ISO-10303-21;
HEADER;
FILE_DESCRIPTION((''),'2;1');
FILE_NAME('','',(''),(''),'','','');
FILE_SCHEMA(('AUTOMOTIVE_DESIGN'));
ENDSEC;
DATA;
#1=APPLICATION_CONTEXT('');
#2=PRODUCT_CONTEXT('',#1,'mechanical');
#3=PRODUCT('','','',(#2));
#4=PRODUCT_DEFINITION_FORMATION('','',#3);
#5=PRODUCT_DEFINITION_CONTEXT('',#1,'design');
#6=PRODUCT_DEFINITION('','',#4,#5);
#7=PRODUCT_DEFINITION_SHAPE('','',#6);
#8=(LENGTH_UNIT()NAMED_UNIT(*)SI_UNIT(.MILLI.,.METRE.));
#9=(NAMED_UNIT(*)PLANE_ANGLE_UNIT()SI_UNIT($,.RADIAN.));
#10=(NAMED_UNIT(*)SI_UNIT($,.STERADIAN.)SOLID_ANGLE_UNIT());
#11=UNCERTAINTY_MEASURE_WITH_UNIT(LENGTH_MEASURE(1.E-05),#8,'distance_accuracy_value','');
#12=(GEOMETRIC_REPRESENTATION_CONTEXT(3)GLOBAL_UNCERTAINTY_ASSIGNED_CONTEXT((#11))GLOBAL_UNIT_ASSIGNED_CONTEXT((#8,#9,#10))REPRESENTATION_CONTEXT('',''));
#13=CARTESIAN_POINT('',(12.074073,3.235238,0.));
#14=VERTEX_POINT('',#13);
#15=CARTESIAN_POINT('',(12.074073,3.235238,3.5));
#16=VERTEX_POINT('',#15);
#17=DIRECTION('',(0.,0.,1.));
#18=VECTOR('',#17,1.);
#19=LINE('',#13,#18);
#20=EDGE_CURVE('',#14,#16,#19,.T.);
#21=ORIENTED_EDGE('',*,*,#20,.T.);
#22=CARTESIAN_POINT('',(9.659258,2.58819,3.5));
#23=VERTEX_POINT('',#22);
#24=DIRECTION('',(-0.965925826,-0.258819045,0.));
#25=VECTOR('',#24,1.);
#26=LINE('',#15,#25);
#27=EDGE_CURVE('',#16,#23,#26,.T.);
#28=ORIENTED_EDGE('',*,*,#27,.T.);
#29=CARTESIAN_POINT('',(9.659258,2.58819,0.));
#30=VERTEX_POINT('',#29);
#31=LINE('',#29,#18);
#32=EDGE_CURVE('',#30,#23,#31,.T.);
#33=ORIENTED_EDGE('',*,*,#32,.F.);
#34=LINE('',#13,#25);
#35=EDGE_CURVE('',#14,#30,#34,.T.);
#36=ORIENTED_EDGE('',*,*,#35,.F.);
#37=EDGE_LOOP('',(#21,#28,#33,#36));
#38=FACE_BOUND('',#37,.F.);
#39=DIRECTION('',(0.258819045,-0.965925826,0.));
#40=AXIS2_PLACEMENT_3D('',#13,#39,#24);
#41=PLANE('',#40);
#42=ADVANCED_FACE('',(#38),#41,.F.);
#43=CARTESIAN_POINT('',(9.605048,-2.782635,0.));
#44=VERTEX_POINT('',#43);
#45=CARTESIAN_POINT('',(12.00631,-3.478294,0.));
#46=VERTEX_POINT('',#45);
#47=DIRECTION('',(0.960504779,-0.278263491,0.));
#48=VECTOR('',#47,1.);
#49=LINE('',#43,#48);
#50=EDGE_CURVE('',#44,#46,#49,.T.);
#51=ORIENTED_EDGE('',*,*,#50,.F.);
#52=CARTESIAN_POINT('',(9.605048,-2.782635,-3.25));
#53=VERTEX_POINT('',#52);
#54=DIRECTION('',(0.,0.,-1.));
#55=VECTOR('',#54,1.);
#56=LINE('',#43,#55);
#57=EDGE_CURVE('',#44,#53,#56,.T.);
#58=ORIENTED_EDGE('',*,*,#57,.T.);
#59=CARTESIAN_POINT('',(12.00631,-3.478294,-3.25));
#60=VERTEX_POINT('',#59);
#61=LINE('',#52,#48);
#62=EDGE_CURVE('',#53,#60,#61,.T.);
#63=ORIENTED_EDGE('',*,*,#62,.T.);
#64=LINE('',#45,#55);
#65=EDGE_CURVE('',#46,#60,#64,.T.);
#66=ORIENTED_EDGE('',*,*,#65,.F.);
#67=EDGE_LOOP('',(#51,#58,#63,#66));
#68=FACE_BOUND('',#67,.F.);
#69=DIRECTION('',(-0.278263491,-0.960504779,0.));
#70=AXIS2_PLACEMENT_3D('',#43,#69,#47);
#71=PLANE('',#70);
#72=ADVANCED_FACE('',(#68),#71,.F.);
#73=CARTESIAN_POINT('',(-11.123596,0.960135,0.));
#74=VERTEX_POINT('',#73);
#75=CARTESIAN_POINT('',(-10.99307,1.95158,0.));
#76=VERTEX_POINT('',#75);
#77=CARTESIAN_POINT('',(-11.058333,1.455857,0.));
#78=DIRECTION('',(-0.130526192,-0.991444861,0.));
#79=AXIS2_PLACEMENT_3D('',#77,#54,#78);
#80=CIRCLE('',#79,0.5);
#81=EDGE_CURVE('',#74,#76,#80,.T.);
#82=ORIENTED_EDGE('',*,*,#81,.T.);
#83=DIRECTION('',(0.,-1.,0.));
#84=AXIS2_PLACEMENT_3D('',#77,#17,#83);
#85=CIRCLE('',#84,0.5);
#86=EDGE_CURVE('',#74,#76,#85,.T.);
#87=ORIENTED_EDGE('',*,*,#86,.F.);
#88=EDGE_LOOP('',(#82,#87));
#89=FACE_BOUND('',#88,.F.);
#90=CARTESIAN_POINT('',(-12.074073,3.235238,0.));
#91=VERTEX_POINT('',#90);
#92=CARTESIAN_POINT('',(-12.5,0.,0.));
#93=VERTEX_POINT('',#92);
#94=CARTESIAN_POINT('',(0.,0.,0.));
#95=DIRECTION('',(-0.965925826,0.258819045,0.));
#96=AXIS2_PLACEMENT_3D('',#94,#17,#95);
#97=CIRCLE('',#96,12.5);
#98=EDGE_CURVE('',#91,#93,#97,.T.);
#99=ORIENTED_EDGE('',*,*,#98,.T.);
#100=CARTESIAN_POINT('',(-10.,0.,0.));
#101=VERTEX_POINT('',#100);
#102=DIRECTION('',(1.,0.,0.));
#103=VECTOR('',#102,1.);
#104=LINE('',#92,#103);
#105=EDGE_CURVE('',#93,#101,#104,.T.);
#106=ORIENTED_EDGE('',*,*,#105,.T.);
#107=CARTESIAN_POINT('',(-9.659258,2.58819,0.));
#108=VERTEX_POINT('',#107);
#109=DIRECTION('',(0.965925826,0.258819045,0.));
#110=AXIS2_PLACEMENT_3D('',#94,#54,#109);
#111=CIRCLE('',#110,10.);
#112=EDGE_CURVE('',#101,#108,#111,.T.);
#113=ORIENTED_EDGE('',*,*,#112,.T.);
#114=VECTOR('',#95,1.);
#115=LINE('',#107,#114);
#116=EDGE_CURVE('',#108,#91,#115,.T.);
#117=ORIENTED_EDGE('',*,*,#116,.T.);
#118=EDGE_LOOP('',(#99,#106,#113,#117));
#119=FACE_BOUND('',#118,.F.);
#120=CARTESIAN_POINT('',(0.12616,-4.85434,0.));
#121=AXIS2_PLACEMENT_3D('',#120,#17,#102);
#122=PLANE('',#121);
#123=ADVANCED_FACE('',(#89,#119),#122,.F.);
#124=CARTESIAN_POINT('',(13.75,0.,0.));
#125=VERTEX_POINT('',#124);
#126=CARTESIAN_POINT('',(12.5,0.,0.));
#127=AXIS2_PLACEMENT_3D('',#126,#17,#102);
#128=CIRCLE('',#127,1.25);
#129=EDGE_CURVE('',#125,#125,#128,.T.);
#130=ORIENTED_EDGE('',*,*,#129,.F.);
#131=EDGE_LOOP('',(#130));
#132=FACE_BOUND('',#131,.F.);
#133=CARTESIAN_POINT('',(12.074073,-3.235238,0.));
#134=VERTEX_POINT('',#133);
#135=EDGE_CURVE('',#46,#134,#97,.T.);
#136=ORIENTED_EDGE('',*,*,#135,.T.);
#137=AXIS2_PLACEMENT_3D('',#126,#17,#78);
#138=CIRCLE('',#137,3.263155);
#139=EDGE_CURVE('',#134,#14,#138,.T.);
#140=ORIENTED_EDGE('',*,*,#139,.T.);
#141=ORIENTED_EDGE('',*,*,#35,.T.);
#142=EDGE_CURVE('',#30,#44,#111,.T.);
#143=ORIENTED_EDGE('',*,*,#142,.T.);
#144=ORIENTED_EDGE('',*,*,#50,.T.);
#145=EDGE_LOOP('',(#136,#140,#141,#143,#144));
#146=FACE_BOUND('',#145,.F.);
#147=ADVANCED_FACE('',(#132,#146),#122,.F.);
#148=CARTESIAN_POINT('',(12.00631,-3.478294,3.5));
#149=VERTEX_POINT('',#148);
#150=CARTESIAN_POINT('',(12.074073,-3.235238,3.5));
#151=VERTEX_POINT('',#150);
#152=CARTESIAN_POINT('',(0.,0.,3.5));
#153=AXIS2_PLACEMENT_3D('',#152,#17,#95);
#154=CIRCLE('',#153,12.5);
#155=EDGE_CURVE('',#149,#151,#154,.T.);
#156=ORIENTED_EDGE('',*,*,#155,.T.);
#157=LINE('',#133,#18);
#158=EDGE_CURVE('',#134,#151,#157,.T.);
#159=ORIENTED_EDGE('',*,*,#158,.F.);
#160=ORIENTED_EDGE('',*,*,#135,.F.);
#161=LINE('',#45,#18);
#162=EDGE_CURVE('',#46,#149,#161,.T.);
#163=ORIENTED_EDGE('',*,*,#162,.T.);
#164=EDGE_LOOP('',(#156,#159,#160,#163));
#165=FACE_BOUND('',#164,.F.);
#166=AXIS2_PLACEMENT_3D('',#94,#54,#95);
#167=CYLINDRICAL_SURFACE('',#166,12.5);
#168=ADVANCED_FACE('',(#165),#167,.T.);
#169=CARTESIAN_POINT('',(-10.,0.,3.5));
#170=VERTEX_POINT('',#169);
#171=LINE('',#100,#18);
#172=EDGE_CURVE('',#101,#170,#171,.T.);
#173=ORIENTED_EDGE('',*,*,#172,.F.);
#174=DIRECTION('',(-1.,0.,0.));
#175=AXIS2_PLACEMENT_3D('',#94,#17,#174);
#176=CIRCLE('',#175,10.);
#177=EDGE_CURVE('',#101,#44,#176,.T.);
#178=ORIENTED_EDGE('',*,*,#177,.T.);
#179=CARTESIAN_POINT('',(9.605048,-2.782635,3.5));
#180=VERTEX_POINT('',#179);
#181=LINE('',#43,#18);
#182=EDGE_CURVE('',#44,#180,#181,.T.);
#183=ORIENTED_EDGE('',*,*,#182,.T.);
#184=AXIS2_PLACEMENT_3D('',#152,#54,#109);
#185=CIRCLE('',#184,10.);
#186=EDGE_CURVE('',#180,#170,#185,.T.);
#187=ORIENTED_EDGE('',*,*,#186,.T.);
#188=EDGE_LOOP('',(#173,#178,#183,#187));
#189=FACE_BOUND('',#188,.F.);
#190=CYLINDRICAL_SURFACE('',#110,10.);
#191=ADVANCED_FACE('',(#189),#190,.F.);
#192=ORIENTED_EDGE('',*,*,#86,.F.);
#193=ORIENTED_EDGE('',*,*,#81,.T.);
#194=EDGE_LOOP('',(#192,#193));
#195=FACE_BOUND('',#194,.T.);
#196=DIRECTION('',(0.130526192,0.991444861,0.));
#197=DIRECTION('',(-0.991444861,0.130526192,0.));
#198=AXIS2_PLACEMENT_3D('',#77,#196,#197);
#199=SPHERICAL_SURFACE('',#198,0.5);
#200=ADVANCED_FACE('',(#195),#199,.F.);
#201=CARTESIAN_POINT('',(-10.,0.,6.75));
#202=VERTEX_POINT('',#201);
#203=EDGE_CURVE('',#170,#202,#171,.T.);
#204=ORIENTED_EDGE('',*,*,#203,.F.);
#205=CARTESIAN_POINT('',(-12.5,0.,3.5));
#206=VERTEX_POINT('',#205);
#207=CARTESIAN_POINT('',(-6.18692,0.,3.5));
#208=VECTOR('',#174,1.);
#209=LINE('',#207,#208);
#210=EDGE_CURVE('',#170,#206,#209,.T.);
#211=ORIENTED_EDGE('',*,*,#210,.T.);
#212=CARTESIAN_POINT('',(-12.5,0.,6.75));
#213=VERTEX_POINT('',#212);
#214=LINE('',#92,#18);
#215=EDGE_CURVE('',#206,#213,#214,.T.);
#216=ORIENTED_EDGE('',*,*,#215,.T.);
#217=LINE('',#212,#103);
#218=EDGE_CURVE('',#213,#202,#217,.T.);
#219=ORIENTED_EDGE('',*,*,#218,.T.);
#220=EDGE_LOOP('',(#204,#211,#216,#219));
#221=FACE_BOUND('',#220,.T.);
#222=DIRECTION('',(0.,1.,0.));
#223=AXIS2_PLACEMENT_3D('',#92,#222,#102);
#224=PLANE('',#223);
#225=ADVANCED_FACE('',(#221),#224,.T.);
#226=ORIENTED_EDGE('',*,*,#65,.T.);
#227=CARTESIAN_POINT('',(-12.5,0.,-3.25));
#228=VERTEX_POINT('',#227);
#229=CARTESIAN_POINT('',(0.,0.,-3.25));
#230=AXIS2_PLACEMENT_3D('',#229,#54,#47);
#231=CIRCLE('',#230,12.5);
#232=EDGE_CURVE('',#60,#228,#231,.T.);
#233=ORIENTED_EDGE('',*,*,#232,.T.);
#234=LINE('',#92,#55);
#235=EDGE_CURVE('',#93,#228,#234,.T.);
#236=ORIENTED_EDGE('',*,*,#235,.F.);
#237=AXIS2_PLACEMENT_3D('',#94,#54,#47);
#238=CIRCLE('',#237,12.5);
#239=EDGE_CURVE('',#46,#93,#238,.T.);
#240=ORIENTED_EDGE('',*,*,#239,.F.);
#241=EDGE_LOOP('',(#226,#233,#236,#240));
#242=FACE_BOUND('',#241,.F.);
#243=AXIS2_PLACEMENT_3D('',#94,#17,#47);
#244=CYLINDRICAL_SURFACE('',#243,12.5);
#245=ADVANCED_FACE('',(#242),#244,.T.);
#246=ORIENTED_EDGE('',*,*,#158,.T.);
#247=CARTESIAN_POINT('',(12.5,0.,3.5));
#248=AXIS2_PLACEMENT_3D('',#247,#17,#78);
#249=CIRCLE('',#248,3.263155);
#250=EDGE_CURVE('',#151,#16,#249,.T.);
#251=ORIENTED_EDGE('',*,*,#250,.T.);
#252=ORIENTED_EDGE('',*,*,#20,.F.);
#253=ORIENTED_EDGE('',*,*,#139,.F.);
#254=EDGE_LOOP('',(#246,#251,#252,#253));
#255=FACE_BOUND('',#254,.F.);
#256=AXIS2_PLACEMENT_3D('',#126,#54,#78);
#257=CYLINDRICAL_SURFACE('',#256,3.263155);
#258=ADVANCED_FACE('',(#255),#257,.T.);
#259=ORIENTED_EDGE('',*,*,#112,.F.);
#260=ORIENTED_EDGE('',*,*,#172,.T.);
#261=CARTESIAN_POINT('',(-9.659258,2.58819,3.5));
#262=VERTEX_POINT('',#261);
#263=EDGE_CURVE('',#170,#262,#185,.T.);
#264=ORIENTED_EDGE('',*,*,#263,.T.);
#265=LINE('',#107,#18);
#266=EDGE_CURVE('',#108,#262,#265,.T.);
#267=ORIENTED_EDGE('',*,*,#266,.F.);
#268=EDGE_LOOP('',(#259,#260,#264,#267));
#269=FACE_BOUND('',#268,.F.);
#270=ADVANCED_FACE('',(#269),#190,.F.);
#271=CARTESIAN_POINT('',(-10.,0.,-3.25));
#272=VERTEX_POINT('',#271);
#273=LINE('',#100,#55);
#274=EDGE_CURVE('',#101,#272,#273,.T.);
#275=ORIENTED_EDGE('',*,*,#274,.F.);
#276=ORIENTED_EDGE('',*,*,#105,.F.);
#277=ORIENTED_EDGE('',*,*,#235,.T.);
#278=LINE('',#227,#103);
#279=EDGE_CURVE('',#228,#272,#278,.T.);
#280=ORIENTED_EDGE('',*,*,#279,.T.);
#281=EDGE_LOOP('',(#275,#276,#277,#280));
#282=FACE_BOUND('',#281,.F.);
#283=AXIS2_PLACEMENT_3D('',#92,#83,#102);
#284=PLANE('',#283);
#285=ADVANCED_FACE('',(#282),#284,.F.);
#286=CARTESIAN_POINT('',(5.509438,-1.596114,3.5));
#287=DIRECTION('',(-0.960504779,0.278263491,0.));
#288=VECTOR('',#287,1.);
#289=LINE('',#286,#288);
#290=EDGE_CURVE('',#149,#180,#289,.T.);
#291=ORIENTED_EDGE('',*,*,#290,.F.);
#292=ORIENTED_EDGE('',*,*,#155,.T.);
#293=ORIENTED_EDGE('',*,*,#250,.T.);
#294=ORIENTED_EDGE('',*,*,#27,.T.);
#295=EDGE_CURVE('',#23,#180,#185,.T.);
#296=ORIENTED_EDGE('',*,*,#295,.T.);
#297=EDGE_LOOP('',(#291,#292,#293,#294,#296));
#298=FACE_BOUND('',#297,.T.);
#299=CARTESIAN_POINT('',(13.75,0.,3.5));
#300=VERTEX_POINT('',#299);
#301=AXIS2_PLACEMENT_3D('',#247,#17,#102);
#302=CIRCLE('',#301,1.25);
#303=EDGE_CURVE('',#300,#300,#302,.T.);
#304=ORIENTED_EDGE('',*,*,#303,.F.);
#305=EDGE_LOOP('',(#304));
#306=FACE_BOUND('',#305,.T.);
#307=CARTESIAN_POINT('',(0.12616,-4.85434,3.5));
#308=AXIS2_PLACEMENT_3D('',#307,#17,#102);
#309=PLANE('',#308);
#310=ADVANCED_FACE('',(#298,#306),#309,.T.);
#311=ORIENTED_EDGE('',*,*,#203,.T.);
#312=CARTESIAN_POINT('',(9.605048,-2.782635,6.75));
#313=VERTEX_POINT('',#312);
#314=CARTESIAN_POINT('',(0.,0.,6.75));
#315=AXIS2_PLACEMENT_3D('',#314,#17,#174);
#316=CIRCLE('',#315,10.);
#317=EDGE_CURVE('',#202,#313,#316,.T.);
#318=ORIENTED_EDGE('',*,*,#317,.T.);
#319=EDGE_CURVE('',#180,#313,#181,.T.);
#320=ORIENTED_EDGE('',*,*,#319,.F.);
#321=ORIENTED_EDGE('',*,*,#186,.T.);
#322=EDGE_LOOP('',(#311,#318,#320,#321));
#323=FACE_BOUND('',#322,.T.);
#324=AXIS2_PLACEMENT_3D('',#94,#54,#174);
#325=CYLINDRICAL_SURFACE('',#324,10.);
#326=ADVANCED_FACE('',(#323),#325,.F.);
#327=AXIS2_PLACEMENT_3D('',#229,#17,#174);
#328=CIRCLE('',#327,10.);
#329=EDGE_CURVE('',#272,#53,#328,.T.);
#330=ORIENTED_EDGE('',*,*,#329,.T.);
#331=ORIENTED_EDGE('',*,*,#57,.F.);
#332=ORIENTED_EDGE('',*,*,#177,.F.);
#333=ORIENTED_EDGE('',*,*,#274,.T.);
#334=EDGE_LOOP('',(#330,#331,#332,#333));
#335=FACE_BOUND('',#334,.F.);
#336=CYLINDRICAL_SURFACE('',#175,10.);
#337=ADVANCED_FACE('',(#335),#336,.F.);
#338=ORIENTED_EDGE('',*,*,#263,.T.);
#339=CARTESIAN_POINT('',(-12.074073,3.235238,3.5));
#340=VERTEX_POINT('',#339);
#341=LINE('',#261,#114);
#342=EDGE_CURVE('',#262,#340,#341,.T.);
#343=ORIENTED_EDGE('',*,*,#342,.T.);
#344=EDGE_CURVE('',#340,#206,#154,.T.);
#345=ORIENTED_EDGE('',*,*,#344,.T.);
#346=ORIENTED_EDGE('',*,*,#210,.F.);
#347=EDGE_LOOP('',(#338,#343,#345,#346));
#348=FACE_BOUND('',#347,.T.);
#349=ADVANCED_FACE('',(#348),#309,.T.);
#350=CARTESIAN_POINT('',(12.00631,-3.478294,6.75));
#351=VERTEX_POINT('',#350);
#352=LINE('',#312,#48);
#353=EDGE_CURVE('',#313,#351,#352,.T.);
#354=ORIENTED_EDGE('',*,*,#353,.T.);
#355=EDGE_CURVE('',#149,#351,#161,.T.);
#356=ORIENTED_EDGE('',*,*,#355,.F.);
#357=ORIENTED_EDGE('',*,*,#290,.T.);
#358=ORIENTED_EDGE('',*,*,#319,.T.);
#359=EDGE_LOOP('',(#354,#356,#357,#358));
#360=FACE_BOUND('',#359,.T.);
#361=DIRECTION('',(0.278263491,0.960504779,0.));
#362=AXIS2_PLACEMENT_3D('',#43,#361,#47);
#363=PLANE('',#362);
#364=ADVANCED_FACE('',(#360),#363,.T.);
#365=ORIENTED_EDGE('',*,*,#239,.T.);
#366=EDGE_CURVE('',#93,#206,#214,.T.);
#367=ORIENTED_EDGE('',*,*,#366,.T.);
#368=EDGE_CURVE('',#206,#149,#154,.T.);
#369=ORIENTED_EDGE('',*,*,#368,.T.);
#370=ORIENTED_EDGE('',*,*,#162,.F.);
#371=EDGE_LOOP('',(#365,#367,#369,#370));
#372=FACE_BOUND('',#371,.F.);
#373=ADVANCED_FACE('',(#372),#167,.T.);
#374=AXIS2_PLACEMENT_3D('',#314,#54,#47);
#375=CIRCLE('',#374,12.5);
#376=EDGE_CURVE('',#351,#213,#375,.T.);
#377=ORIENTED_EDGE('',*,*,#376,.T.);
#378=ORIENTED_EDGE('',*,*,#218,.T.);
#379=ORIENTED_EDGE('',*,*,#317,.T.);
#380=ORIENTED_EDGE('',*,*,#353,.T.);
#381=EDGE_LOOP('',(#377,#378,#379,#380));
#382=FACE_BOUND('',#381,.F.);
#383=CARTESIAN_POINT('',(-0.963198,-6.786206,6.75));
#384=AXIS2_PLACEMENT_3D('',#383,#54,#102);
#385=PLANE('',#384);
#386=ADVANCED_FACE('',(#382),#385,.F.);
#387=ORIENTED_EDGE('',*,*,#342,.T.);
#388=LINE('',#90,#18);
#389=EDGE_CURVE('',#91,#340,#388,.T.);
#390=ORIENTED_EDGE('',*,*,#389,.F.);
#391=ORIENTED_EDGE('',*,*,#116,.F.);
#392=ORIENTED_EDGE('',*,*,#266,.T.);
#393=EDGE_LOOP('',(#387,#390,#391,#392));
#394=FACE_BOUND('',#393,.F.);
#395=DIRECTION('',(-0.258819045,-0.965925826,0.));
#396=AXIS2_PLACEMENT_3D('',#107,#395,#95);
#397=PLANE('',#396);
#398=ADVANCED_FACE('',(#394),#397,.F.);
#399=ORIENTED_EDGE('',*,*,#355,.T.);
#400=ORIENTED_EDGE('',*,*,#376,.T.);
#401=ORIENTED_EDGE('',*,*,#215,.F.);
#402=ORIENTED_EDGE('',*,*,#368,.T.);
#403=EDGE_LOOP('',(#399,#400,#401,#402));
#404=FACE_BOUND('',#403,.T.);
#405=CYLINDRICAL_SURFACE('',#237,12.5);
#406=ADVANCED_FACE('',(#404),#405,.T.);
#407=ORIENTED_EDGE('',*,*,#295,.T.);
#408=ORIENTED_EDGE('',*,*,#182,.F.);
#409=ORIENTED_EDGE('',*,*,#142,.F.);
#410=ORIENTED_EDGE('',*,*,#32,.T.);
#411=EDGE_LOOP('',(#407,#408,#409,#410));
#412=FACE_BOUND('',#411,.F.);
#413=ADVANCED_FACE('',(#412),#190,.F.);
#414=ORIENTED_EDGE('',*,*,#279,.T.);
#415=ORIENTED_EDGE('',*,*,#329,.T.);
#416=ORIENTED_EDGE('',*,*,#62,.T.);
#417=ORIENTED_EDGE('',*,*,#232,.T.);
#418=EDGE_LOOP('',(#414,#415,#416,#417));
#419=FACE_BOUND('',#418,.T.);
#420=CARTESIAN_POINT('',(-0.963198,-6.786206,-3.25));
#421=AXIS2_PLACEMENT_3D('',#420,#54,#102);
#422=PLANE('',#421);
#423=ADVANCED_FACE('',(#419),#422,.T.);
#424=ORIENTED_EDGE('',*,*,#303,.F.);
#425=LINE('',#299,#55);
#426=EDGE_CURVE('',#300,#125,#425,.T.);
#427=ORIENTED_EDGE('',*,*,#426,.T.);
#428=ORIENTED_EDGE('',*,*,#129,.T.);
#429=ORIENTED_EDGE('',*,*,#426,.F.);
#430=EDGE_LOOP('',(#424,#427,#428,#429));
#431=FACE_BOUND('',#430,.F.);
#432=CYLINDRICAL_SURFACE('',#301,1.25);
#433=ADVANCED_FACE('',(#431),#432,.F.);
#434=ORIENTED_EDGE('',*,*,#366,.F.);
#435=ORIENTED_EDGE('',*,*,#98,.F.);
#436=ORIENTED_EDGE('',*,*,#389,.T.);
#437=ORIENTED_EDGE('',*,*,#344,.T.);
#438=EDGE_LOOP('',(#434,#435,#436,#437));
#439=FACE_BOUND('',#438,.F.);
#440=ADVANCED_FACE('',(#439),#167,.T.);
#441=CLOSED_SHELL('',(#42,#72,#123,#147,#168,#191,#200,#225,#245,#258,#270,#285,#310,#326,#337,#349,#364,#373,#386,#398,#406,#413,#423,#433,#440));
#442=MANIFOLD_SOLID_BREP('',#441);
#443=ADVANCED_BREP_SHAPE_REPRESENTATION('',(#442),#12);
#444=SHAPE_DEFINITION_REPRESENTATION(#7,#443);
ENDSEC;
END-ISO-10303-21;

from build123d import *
from build123d import SkipClean  # not in build123d's __all__

# Parameters (mm, degrees)
F1_DEPTH      = 3.5
F2_R          = 1.25
F3_DEPTH      = 3.5
F5_DEPTH      = 3.25
F5_DEPTH_BACK = 6.75


# Not quite as in the source:
# - after a boolean that leaves OpenCascade's solid faulty, fix() repairs it


with BuildPart() as f1:
    # F0 (on Top) → F1 (new body)
    with BuildSketch(Plane.XY):
        with BuildLine():
            ThreePointArc((9.6592582629, 2.588190451), (0, -10), (-9.6592582629, 2.588190451))
            Line((-9.6592582629, 2.588190451), (-12.0740728286, 3.2352380638))
            ThreePointArc((-12.0740728286, 3.2352380638), (-3.2352380638, -12.0740728286), (12.0740728286, -3.2352380638))
            ThreePointArc((12.0740728286, -3.2352380638), (12.5, 0), (12.0740728286, 3.2352380638))
            Line((12.0740728286, 3.2352380638), (9.6592582629, 2.588190451))
        make_face()
        with BuildLine():
            ThreePointArc((12.0740728286, -3.2352380638), (15.7631548055, 0), (12.0740728286, 3.2352380638))
            ThreePointArc((12.0740728286, 3.2352380638), (12.5, 0), (12.0740728286, -3.2352380638))
        make_face()
    extrude(amount=F1_DEPTH)

    # F2 (on face) → F3 (cut, through all)
    with BuildSketch(Plane.XY.offset(3.5)):
        with Locations((12.5, 0)):
            Circle(F2_R)
    extrude(amount=-F3_DEPTH, mode=Mode.SUBTRACT)

    # F4 (on face) → F5 (join, two sides)
    with BuildSketch(Plane(origin=(0, 0, 0), x_dir=(1, 0, 0), z_dir=(0, 0, -1))) as f5_sk:
        with BuildLine():
            ThreePointArc((12.0063097325, 3.4782936344), (-1.7565774028, 12.3759620163), (-12.5, 0))
            Line((-12.5, 0), (-10, 0))
            ThreePointArc((-10, 0), (-1.4052619222, 9.900769613), (9.605047786, 2.7826349075))
            Line((9.605047786, 2.7826349075), (12.0063097325, 3.4782936344))
        make_face()
    with SkipClean():  # cleaning this boolean's faces spoils the solid; the shape is the same uncleaned
        extrude(amount=F5_DEPTH)
        extrude(f5_sk.sketch, amount=-F5_DEPTH_BACK)

    # F6 (on face) → F7 (revolve, cut)
    with BuildSketch(Plane(origin=(0, 0, 0), x_dir=(1, 0, 0), z_dir=(0, 0, -1))):
        with BuildLine():
            Line((-10.9930696768, -1.9515795594), (-11.123595869, -0.960134698))
            ThreePointArc((-11.123595869, -0.960134698), (-11.5540552036, -1.5211202248), (-10.9930696768, -1.9515795594))
        make_face()
    revolve(axis=Axis((-11.0583327729, 1.4558571287, 0), (-0.1305261922, -0.9914448614, 0)), mode=Mode.SUBTRACT)

    add(f1.part.fix(), mode=Mode.REPLACE)


solid = f1.part
